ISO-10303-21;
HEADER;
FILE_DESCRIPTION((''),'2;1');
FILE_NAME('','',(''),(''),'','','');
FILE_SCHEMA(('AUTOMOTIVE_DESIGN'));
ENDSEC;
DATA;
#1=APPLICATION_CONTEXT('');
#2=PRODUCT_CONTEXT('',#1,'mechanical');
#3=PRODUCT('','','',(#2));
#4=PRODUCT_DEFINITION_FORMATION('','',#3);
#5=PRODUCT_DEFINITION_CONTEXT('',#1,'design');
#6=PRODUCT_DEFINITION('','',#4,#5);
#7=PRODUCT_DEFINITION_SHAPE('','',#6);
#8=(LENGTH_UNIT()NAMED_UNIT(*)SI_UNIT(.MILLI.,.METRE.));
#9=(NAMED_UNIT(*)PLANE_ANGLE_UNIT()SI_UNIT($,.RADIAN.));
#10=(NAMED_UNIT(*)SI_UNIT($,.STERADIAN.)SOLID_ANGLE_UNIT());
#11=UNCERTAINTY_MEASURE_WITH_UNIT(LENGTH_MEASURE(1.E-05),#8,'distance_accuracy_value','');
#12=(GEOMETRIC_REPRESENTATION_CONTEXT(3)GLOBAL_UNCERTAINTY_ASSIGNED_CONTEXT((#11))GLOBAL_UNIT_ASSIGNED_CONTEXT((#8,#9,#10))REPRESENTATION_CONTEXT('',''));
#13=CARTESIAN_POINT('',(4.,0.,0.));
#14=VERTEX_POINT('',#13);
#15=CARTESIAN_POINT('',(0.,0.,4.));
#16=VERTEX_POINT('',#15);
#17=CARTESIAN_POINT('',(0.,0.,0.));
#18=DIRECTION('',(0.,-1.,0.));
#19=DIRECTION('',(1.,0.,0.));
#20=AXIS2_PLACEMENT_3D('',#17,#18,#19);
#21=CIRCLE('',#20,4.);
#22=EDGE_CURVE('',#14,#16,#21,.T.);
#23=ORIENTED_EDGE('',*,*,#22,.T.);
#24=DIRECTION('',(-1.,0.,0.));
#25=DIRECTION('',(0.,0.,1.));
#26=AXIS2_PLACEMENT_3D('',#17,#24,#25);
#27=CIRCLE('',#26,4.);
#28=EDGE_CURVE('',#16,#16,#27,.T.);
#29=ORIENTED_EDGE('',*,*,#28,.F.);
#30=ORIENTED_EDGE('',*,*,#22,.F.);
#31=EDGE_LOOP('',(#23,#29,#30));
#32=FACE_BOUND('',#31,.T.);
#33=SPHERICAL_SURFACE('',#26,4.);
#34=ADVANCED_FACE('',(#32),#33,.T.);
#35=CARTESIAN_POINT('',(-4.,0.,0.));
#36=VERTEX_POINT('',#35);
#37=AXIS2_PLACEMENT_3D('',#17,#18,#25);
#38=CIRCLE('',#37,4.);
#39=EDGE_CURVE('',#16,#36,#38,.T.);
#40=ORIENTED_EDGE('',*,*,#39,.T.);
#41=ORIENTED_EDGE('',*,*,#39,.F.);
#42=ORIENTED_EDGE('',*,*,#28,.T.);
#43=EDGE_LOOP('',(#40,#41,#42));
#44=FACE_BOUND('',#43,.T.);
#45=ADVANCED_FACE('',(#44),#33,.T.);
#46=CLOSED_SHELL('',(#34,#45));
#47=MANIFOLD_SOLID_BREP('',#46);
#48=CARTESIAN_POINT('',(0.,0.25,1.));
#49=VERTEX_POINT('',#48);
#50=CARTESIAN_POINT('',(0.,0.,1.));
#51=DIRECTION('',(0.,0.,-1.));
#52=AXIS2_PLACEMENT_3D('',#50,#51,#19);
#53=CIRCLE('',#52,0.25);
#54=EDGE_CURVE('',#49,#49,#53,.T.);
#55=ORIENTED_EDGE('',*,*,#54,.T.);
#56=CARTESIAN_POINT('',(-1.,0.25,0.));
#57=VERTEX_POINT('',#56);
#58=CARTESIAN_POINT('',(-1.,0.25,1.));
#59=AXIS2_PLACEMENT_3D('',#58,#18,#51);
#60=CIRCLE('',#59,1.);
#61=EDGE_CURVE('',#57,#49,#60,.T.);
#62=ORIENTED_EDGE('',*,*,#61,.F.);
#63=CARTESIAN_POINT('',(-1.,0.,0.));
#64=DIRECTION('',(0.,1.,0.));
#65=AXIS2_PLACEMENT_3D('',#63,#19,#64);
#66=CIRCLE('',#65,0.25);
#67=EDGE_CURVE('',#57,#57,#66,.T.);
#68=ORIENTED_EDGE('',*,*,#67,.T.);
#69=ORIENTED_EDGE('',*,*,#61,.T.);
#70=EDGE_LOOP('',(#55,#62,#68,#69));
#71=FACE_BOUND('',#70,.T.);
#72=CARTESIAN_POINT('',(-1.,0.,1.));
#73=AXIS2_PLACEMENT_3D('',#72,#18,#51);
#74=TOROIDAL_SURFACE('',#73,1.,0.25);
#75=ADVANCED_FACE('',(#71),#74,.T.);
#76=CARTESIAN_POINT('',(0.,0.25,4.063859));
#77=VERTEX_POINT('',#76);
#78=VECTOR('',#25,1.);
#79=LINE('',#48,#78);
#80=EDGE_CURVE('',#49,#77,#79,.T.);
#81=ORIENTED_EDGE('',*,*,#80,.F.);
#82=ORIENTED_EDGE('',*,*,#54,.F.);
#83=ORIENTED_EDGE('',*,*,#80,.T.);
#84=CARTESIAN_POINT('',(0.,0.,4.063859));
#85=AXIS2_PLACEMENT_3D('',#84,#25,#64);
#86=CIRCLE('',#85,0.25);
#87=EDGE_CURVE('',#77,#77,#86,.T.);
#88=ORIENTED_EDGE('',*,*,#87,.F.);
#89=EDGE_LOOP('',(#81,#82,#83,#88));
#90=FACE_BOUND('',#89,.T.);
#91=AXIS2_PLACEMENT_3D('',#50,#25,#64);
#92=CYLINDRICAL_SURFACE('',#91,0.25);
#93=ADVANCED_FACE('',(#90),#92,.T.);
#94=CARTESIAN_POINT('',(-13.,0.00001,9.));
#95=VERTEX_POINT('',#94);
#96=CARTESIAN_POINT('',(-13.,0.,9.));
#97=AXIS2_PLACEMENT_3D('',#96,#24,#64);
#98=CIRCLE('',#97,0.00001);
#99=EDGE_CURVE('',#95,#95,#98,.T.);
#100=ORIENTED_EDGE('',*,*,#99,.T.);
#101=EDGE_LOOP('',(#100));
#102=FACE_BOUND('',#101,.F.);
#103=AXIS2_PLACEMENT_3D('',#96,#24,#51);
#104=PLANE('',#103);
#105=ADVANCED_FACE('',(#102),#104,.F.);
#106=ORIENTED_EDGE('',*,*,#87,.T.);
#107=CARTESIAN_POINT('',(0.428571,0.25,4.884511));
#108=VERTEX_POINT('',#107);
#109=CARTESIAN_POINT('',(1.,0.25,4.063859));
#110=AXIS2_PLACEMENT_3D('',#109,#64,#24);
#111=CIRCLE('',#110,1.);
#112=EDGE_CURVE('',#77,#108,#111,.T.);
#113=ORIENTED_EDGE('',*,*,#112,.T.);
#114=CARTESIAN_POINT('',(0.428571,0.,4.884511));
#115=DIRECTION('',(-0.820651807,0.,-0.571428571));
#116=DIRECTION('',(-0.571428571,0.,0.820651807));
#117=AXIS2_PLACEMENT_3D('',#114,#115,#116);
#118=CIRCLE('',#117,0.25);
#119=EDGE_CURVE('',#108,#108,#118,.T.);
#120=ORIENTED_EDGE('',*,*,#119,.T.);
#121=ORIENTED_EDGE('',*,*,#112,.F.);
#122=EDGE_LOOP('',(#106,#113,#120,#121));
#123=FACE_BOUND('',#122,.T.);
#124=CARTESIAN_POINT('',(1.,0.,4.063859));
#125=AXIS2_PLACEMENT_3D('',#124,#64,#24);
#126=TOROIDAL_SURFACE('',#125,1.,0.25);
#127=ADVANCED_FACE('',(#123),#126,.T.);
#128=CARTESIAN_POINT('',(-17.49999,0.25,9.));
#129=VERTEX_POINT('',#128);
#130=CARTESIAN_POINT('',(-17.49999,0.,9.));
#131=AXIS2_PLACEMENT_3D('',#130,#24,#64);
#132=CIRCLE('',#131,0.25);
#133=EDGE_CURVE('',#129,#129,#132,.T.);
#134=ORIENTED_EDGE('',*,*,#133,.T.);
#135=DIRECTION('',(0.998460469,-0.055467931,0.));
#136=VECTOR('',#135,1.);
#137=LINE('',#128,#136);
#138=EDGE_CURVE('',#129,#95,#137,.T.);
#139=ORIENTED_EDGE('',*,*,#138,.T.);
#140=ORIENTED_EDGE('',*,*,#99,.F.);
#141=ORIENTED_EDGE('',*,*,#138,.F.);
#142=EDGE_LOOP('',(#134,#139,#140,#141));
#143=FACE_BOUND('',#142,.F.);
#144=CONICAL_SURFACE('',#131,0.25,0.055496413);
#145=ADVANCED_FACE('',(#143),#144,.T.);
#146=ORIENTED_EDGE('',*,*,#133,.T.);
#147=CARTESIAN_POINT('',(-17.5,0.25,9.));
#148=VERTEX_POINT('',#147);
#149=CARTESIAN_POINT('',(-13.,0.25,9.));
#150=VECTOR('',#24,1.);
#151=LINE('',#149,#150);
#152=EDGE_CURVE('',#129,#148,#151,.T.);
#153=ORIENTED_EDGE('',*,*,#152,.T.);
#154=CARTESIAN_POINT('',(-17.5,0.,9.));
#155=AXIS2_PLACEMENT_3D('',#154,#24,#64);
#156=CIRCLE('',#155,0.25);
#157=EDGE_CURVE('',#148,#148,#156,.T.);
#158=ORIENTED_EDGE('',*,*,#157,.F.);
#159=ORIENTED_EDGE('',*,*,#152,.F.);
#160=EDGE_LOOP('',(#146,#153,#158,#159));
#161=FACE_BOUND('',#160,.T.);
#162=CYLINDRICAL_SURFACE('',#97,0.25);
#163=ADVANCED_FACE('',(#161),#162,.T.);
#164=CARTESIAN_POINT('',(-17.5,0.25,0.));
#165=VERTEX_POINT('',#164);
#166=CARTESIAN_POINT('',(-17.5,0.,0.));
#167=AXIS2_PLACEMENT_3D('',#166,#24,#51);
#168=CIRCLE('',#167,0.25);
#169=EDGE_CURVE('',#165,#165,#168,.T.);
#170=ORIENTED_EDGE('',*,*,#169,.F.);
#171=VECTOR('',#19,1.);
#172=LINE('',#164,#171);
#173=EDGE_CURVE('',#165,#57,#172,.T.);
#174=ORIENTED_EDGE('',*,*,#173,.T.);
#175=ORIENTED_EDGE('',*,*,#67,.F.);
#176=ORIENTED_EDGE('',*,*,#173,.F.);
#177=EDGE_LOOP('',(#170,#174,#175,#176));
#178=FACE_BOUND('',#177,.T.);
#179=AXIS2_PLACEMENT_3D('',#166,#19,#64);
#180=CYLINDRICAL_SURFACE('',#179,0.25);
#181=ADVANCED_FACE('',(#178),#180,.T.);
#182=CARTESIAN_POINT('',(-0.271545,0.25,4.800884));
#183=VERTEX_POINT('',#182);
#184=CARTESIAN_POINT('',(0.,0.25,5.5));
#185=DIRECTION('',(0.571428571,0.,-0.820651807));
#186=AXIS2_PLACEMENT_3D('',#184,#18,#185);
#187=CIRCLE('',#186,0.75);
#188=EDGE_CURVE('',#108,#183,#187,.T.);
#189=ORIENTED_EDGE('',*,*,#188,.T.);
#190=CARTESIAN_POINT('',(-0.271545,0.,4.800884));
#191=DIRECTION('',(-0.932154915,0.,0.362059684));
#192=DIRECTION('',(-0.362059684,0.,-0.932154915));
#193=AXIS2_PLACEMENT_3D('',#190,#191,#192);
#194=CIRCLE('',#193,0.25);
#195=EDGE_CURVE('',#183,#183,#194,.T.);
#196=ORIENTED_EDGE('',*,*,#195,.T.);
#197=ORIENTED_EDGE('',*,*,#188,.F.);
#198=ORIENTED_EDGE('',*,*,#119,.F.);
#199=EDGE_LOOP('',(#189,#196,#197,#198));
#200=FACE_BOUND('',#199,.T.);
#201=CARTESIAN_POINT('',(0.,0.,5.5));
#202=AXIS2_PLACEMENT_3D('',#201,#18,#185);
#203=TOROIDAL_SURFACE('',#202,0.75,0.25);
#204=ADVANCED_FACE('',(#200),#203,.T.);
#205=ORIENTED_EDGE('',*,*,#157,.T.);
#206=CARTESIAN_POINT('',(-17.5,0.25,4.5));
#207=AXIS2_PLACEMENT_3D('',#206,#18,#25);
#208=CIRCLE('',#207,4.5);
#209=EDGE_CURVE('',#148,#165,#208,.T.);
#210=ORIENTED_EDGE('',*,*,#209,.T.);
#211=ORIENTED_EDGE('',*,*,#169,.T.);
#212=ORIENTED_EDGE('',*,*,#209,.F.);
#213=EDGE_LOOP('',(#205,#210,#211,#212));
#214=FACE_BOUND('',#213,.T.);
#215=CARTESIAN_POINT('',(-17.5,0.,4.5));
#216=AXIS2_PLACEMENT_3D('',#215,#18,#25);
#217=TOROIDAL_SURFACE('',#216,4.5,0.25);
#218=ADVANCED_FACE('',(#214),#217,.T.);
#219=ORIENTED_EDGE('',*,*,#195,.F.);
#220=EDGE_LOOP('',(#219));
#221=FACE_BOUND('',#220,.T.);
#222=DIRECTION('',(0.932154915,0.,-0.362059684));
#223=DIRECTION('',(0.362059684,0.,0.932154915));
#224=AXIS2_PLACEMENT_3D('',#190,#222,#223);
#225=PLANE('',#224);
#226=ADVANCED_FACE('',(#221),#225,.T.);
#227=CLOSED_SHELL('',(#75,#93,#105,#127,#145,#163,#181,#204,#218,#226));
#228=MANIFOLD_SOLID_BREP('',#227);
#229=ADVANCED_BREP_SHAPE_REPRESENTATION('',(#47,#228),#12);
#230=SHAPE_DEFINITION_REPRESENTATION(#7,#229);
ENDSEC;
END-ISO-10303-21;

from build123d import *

# Parameters (mm, degrees)
F3_R     = 0.25
F5_SIZE2 = 0.24999
F5_SIZE  = 4.49999


# Not quite as in the source:
# - a fillet or chamfer is up to 0.001 mm smaller than in the source, because OpenCascade refuses the exact size


with BuildPart() as f1:
    # F0 (on Front) → F1 (revolve)
    with BuildSketch(Plane.XZ):
        with BuildLine():
            Line((-1, 0), (4, 0))
            ThreePointArc((4, 0), (2.8284271247, 2.8284271247), (0, 4))
            Line((0, 4), (0, 1))
            ThreePointArc((0, 1), (-0.2928932188, 0.2928932188), (-1, 0))
        make_face()
        with BuildLine():
            Line((0, 1), (0, 4))
            ThreePointArc((0, 4), (-2.8284271247, 2.8284271247), (-4, 0))
            Line((-4, 0), (-1, 0))
            ThreePointArc((-1, 0), (-0.2928932188, 0.2928932188), (0, 1))
        make_face()
    revolve(axis=Axis((-9.25, 0, 0), (-1, 0, 0)))


with BuildPart() as f4:
    # F4: sweep along a path in F0
    with BuildLine(Plane.XZ) as f4_path:
        Line((-13, 9), (-17.5, 9))
        ThreePointArc((-17.5, 9), (-22, 4.5), (-17.5, 0))
        Line((-17.5, 0), (-1, 0))
        ThreePointArc((-1, 0), (-0.2928932188, 0.2928932188), (0, 1))
        Line((0, 1), (0, 4.0638593384))
        ThreePointArc((0, 4.0638593384), (0.1135947396, 4.5267693883), (0.4285714286, 4.884511145))
        ThreePointArc((0.4285714286, 4.884511145), (-0.0889535051, 6.2447061662), (-0.2715447628, 4.8008838138))
    # F3 (on plane+point) → F4 (sweep)
    with BuildSketch(Plane.YZ.offset(-17.5)):
        Circle(F3_R)
    sweep(path=f4_path.line)

    # F5 (size 4.5 and 0.25 in the source; OpenCascade refuses exactly that, so slightly less here)
    f5_edges = [f4.edges().sort_by_distance(p)[0] for p in [
        (-13, -0.25, 9),
    ]]
    chamfer(f5_edges, length=F5_SIZE, length2=F5_SIZE2)


solid = Compound([f1.part, f4.part])
